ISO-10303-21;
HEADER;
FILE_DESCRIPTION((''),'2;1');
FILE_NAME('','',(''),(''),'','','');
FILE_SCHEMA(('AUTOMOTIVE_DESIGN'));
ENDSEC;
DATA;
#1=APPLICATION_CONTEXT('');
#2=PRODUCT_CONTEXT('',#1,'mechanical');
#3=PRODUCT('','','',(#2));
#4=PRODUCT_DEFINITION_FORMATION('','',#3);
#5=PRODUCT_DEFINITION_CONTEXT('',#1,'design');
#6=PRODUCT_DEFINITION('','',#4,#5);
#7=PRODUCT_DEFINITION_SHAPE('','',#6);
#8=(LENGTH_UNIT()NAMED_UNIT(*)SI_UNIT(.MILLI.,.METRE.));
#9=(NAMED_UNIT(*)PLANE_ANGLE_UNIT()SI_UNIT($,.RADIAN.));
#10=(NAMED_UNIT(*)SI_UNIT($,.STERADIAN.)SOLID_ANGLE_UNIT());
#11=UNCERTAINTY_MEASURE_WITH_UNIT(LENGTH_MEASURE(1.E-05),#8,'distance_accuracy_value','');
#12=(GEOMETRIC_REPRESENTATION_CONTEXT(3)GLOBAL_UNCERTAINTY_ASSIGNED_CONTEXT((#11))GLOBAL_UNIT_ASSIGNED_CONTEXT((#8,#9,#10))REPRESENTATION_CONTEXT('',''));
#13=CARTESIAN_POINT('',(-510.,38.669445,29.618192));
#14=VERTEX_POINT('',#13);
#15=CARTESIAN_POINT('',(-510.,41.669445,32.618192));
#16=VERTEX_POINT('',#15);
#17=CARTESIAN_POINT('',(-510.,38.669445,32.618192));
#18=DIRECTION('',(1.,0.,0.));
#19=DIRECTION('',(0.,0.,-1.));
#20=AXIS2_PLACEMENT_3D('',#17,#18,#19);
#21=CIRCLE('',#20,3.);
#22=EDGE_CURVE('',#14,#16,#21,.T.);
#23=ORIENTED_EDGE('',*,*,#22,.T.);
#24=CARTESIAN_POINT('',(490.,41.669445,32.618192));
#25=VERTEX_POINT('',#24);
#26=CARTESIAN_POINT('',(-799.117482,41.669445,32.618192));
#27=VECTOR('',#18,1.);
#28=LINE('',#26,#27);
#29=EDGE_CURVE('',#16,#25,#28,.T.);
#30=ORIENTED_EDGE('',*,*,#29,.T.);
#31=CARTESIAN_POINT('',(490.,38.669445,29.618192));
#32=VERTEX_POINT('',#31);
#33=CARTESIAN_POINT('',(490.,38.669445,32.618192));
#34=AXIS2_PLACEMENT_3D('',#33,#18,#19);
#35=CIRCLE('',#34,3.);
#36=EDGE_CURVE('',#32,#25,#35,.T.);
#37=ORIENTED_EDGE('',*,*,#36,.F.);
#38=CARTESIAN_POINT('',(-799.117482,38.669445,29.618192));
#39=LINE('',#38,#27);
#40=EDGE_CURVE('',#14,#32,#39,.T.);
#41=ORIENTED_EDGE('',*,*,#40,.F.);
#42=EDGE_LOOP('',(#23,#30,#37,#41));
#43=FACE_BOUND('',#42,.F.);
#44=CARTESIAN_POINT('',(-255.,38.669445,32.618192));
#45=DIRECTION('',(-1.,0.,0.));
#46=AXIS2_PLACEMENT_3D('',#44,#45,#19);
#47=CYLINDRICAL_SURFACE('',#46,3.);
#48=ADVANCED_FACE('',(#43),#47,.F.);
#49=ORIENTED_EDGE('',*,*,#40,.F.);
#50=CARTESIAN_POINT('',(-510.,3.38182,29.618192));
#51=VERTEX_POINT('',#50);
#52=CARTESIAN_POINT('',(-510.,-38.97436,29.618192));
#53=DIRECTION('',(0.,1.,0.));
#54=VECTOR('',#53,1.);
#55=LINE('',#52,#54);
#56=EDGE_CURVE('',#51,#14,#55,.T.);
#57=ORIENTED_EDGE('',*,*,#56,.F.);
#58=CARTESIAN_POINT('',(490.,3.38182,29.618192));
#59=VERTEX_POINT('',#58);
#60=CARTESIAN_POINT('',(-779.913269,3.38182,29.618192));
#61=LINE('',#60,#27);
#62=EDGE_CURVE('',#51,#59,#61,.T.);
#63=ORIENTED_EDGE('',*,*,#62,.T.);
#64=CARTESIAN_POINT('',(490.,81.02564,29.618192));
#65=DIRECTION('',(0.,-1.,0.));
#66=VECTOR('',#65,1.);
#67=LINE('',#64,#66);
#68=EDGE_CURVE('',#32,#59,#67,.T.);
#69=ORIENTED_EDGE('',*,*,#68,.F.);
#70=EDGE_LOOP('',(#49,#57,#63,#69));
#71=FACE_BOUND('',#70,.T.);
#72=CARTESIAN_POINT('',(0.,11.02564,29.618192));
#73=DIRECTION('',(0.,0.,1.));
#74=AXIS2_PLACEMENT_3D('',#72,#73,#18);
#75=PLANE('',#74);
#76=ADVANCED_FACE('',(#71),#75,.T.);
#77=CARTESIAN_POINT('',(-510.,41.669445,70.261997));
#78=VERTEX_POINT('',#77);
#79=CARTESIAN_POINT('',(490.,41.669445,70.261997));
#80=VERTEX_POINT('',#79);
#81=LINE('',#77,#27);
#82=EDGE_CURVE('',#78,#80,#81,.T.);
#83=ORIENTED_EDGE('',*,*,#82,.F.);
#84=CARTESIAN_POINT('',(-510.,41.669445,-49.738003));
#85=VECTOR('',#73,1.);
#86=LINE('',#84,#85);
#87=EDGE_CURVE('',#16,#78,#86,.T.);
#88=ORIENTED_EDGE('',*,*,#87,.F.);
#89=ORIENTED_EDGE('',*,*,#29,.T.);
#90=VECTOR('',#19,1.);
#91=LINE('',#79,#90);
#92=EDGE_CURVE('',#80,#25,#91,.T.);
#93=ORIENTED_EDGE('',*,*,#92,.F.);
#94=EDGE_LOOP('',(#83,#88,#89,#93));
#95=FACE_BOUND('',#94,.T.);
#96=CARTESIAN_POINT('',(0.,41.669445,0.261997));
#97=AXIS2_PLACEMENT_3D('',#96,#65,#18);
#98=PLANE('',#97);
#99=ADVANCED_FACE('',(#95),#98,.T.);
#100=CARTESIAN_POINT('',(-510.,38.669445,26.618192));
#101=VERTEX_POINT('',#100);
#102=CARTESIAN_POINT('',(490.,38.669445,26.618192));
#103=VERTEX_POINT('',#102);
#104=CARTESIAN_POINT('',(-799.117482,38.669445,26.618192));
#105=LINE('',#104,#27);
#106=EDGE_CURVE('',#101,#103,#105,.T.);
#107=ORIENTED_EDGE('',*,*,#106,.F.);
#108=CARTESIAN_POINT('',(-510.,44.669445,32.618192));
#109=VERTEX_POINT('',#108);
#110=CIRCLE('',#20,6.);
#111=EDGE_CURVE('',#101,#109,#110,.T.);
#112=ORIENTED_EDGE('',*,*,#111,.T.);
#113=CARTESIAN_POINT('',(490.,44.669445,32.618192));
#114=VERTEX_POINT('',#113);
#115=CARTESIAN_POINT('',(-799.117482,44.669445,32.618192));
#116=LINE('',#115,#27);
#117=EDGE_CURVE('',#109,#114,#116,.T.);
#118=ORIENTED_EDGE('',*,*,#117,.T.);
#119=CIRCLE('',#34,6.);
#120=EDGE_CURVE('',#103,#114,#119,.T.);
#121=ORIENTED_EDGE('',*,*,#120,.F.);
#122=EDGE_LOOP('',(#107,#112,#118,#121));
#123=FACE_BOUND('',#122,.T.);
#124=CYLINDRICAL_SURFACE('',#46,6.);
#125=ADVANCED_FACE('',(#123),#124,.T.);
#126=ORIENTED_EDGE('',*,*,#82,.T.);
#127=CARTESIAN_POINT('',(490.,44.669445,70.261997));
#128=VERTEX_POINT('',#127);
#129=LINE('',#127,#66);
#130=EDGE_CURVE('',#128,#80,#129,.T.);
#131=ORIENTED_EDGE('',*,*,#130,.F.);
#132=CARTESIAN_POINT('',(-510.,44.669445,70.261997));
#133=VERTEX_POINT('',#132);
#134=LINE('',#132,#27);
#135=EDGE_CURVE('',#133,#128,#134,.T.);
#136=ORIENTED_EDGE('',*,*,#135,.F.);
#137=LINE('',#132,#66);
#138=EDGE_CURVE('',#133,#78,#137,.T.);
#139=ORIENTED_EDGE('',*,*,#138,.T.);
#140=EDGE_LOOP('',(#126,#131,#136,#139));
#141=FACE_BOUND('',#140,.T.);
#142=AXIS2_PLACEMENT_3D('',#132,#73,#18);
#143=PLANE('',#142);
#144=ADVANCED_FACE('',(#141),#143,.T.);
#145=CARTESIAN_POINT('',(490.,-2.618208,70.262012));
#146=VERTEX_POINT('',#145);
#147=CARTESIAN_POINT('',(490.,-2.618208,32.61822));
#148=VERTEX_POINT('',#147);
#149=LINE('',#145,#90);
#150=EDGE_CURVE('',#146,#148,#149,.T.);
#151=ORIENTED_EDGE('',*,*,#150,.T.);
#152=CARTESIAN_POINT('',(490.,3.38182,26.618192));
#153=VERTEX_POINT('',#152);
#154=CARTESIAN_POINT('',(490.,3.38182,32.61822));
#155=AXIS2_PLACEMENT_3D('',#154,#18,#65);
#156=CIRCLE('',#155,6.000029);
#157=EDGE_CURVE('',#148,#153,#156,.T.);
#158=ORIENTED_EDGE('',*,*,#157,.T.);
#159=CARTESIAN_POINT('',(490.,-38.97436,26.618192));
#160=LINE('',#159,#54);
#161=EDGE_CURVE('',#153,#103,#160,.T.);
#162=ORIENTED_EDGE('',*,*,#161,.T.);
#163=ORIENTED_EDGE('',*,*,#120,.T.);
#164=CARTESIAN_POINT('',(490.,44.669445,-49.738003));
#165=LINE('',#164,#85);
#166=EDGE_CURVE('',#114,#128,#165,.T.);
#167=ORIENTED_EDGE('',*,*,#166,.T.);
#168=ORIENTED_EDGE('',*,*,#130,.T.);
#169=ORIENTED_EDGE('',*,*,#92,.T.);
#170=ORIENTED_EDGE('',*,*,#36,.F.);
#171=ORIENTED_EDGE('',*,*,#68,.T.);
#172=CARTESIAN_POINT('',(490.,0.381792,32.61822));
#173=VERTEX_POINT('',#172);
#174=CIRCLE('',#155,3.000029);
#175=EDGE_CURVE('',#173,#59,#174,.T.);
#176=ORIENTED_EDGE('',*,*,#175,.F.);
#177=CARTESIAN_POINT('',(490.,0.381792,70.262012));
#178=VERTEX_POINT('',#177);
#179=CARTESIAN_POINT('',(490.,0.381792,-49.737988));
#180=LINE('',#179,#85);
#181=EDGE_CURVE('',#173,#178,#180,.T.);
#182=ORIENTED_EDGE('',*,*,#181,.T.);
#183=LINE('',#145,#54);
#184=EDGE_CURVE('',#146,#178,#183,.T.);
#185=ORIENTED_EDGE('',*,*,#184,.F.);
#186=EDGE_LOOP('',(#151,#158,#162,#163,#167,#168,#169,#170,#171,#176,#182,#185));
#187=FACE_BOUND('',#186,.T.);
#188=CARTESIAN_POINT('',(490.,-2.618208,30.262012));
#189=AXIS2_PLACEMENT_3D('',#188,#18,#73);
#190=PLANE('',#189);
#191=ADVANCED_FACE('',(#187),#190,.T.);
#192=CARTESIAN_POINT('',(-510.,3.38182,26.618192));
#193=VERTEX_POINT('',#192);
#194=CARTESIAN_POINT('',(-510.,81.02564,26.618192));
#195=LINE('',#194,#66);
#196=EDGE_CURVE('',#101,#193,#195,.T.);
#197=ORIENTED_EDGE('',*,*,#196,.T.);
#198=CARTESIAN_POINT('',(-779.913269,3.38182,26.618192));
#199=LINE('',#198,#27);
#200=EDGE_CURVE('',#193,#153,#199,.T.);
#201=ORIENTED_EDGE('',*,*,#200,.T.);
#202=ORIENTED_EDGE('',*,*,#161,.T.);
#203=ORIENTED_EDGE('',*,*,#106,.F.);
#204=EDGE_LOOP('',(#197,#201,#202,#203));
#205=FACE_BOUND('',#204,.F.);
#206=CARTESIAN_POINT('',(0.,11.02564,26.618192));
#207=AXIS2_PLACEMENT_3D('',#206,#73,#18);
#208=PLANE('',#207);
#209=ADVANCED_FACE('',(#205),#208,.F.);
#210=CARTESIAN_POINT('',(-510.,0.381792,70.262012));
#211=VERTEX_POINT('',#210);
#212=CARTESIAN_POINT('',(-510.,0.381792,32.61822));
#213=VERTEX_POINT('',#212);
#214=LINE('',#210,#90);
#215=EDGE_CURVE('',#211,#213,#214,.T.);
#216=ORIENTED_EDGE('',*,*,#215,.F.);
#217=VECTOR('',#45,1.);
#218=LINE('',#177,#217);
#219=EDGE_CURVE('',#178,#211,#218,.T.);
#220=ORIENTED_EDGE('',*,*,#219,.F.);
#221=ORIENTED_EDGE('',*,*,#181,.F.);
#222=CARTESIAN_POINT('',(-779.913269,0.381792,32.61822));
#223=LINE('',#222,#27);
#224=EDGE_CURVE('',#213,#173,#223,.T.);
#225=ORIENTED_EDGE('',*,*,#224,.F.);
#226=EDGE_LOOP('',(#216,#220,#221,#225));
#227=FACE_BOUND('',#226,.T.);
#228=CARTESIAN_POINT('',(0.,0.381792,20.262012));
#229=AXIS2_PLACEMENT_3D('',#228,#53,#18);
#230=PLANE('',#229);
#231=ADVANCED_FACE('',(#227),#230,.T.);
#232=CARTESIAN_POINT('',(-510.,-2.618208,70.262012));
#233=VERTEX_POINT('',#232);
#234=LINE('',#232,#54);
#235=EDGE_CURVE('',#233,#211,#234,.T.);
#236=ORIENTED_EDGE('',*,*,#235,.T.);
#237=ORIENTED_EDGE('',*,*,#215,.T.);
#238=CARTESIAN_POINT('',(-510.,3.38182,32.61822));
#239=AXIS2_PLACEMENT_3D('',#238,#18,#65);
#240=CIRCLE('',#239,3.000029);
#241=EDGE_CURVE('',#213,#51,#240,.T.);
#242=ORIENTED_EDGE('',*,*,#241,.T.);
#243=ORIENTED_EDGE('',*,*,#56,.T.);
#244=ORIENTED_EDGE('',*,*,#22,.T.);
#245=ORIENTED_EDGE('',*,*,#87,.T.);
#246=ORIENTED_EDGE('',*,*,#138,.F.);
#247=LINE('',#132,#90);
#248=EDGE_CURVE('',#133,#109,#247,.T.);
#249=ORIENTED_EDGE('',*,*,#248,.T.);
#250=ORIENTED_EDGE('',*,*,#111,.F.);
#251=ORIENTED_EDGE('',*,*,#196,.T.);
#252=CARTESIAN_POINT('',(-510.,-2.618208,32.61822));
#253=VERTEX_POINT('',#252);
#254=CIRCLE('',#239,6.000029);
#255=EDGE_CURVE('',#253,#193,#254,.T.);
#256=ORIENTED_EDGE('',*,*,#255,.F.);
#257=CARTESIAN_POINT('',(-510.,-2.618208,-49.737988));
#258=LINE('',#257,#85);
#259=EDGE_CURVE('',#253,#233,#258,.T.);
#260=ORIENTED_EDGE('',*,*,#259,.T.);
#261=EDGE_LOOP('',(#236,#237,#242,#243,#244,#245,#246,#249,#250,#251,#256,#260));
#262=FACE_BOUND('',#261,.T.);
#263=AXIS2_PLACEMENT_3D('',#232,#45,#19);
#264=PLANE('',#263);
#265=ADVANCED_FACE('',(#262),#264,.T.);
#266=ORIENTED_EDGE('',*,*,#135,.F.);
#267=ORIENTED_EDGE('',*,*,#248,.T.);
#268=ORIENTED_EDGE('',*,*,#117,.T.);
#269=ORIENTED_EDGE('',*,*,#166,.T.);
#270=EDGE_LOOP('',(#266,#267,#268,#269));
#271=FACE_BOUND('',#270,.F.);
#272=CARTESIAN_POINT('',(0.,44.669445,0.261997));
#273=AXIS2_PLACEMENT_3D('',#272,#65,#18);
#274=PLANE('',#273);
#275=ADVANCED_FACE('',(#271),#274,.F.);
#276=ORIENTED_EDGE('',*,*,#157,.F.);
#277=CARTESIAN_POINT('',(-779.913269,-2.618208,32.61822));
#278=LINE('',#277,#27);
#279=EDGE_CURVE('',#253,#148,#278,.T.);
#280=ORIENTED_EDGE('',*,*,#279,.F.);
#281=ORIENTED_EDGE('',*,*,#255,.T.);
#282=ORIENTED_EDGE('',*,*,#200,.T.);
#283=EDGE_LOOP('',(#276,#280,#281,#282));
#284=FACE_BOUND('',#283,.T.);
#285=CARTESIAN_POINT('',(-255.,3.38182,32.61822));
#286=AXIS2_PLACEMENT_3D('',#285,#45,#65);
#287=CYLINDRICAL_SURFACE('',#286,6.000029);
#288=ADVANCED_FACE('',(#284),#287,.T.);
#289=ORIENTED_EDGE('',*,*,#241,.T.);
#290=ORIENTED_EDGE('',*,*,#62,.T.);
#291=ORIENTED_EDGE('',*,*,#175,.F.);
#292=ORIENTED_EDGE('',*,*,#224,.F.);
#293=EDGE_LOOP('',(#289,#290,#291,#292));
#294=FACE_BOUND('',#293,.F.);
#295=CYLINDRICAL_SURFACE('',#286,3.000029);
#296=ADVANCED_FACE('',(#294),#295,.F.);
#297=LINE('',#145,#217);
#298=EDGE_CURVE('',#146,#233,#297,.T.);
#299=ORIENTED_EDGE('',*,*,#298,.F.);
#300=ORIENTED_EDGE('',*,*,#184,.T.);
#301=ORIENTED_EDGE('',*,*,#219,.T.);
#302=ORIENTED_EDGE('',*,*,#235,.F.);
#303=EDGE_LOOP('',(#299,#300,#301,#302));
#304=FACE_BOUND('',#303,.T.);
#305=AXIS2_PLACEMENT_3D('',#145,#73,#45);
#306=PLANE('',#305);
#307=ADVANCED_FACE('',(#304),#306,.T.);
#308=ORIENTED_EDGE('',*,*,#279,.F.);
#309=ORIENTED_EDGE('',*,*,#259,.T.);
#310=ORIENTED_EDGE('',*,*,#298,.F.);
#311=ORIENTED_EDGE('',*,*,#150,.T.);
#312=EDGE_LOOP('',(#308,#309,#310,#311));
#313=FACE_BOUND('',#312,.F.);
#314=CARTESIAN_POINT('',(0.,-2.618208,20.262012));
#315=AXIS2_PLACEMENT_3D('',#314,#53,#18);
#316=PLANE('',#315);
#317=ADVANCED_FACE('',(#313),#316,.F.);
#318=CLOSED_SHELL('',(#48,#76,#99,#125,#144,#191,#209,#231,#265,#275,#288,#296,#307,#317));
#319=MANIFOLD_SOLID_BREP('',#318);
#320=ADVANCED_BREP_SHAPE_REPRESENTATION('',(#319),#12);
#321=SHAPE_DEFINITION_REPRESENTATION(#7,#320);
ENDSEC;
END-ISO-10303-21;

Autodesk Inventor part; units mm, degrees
ref_plane "YZ Plane" through (0, 0, 0) normal (1, 0, 0) x (0, 1, 0)
ref_plane "XZ Plane" through (0, 0, 0) normal (0, 1, 0) x (-1, 0, 0)
ref_plane "XY Plane" through (0, 0, 0) normal (0, 0, 1) x (1, 0, 0)
sketch "Boceto2" plane through (0, 0, 0) normal (0, 0, 1) x (1, 0, 0)
  line L0 (490, -50) -> (-510, -50)
  line L1 (-510, -50) -> (-510, 70)
  line L2 (-510, 70) -> (490, 70)
  line L3 (490, 70) -> (490, -50)
  line L4 (-510, 70) -> (-510, 30)
  line L5 (-510, 30) -> (490, 30)
  line L6 (-510, 30) -> (-510, -10)
  line L7 (-510, -10) -> (490, -10)
  point P0 (0, 0)
  dimension "d8" = 1000
  dimension "d14" = 120
  dimension "d15" = 40
  dimension "d16" = 40
extrude "Extrusión2" add sketch "Boceto2" along normal blind 3
sketch "Boceto4" plane through (0, 0, 3) normal (0, 0, 1) x (1, 0, 0)
  line L0 (-510, 30) -> (490, 30) projected
  line L1 (-510, -10) -> (490, -10) projected
  point P0 (0, 0)
bend part "Pieza de plegado2" radius 3 angle 90 line through (-510, 30, 3) along (1, 0, 0) centre toward (0, 0, 1) moving side (0, 1, 0) both sides yes
sketch "Boceto5" plane through (-510, 27.8787, 3.8787) normal (0, 0.7071068, 0.7071068) x (1, 0, 0)
  line L0 (0, -77.6438) -> (1000, -77.6438) projected
  line L1 (0, -77.6438) -> (0, -37.6438)
  line L2 (0, 0) -> (0, -77.6438) projected
  line L3 (0, -37.6438) -> (1000, -37.6438)
  line L4 (1000, -77.6438) -> (1000, 0) projected
  point P0 (510, -16.9706)
  dimension "d19" = 40
  dimension "d20" = 90
bend part "Pieza de plegado3" radius 3 angle 90 line through (-510, 1.2605, 30.4969) along (1, 0, 0) centre toward (0, 0.7071068, 0.7071068) moving side (0, 0.7071068, -0.7071068) both sides yes
